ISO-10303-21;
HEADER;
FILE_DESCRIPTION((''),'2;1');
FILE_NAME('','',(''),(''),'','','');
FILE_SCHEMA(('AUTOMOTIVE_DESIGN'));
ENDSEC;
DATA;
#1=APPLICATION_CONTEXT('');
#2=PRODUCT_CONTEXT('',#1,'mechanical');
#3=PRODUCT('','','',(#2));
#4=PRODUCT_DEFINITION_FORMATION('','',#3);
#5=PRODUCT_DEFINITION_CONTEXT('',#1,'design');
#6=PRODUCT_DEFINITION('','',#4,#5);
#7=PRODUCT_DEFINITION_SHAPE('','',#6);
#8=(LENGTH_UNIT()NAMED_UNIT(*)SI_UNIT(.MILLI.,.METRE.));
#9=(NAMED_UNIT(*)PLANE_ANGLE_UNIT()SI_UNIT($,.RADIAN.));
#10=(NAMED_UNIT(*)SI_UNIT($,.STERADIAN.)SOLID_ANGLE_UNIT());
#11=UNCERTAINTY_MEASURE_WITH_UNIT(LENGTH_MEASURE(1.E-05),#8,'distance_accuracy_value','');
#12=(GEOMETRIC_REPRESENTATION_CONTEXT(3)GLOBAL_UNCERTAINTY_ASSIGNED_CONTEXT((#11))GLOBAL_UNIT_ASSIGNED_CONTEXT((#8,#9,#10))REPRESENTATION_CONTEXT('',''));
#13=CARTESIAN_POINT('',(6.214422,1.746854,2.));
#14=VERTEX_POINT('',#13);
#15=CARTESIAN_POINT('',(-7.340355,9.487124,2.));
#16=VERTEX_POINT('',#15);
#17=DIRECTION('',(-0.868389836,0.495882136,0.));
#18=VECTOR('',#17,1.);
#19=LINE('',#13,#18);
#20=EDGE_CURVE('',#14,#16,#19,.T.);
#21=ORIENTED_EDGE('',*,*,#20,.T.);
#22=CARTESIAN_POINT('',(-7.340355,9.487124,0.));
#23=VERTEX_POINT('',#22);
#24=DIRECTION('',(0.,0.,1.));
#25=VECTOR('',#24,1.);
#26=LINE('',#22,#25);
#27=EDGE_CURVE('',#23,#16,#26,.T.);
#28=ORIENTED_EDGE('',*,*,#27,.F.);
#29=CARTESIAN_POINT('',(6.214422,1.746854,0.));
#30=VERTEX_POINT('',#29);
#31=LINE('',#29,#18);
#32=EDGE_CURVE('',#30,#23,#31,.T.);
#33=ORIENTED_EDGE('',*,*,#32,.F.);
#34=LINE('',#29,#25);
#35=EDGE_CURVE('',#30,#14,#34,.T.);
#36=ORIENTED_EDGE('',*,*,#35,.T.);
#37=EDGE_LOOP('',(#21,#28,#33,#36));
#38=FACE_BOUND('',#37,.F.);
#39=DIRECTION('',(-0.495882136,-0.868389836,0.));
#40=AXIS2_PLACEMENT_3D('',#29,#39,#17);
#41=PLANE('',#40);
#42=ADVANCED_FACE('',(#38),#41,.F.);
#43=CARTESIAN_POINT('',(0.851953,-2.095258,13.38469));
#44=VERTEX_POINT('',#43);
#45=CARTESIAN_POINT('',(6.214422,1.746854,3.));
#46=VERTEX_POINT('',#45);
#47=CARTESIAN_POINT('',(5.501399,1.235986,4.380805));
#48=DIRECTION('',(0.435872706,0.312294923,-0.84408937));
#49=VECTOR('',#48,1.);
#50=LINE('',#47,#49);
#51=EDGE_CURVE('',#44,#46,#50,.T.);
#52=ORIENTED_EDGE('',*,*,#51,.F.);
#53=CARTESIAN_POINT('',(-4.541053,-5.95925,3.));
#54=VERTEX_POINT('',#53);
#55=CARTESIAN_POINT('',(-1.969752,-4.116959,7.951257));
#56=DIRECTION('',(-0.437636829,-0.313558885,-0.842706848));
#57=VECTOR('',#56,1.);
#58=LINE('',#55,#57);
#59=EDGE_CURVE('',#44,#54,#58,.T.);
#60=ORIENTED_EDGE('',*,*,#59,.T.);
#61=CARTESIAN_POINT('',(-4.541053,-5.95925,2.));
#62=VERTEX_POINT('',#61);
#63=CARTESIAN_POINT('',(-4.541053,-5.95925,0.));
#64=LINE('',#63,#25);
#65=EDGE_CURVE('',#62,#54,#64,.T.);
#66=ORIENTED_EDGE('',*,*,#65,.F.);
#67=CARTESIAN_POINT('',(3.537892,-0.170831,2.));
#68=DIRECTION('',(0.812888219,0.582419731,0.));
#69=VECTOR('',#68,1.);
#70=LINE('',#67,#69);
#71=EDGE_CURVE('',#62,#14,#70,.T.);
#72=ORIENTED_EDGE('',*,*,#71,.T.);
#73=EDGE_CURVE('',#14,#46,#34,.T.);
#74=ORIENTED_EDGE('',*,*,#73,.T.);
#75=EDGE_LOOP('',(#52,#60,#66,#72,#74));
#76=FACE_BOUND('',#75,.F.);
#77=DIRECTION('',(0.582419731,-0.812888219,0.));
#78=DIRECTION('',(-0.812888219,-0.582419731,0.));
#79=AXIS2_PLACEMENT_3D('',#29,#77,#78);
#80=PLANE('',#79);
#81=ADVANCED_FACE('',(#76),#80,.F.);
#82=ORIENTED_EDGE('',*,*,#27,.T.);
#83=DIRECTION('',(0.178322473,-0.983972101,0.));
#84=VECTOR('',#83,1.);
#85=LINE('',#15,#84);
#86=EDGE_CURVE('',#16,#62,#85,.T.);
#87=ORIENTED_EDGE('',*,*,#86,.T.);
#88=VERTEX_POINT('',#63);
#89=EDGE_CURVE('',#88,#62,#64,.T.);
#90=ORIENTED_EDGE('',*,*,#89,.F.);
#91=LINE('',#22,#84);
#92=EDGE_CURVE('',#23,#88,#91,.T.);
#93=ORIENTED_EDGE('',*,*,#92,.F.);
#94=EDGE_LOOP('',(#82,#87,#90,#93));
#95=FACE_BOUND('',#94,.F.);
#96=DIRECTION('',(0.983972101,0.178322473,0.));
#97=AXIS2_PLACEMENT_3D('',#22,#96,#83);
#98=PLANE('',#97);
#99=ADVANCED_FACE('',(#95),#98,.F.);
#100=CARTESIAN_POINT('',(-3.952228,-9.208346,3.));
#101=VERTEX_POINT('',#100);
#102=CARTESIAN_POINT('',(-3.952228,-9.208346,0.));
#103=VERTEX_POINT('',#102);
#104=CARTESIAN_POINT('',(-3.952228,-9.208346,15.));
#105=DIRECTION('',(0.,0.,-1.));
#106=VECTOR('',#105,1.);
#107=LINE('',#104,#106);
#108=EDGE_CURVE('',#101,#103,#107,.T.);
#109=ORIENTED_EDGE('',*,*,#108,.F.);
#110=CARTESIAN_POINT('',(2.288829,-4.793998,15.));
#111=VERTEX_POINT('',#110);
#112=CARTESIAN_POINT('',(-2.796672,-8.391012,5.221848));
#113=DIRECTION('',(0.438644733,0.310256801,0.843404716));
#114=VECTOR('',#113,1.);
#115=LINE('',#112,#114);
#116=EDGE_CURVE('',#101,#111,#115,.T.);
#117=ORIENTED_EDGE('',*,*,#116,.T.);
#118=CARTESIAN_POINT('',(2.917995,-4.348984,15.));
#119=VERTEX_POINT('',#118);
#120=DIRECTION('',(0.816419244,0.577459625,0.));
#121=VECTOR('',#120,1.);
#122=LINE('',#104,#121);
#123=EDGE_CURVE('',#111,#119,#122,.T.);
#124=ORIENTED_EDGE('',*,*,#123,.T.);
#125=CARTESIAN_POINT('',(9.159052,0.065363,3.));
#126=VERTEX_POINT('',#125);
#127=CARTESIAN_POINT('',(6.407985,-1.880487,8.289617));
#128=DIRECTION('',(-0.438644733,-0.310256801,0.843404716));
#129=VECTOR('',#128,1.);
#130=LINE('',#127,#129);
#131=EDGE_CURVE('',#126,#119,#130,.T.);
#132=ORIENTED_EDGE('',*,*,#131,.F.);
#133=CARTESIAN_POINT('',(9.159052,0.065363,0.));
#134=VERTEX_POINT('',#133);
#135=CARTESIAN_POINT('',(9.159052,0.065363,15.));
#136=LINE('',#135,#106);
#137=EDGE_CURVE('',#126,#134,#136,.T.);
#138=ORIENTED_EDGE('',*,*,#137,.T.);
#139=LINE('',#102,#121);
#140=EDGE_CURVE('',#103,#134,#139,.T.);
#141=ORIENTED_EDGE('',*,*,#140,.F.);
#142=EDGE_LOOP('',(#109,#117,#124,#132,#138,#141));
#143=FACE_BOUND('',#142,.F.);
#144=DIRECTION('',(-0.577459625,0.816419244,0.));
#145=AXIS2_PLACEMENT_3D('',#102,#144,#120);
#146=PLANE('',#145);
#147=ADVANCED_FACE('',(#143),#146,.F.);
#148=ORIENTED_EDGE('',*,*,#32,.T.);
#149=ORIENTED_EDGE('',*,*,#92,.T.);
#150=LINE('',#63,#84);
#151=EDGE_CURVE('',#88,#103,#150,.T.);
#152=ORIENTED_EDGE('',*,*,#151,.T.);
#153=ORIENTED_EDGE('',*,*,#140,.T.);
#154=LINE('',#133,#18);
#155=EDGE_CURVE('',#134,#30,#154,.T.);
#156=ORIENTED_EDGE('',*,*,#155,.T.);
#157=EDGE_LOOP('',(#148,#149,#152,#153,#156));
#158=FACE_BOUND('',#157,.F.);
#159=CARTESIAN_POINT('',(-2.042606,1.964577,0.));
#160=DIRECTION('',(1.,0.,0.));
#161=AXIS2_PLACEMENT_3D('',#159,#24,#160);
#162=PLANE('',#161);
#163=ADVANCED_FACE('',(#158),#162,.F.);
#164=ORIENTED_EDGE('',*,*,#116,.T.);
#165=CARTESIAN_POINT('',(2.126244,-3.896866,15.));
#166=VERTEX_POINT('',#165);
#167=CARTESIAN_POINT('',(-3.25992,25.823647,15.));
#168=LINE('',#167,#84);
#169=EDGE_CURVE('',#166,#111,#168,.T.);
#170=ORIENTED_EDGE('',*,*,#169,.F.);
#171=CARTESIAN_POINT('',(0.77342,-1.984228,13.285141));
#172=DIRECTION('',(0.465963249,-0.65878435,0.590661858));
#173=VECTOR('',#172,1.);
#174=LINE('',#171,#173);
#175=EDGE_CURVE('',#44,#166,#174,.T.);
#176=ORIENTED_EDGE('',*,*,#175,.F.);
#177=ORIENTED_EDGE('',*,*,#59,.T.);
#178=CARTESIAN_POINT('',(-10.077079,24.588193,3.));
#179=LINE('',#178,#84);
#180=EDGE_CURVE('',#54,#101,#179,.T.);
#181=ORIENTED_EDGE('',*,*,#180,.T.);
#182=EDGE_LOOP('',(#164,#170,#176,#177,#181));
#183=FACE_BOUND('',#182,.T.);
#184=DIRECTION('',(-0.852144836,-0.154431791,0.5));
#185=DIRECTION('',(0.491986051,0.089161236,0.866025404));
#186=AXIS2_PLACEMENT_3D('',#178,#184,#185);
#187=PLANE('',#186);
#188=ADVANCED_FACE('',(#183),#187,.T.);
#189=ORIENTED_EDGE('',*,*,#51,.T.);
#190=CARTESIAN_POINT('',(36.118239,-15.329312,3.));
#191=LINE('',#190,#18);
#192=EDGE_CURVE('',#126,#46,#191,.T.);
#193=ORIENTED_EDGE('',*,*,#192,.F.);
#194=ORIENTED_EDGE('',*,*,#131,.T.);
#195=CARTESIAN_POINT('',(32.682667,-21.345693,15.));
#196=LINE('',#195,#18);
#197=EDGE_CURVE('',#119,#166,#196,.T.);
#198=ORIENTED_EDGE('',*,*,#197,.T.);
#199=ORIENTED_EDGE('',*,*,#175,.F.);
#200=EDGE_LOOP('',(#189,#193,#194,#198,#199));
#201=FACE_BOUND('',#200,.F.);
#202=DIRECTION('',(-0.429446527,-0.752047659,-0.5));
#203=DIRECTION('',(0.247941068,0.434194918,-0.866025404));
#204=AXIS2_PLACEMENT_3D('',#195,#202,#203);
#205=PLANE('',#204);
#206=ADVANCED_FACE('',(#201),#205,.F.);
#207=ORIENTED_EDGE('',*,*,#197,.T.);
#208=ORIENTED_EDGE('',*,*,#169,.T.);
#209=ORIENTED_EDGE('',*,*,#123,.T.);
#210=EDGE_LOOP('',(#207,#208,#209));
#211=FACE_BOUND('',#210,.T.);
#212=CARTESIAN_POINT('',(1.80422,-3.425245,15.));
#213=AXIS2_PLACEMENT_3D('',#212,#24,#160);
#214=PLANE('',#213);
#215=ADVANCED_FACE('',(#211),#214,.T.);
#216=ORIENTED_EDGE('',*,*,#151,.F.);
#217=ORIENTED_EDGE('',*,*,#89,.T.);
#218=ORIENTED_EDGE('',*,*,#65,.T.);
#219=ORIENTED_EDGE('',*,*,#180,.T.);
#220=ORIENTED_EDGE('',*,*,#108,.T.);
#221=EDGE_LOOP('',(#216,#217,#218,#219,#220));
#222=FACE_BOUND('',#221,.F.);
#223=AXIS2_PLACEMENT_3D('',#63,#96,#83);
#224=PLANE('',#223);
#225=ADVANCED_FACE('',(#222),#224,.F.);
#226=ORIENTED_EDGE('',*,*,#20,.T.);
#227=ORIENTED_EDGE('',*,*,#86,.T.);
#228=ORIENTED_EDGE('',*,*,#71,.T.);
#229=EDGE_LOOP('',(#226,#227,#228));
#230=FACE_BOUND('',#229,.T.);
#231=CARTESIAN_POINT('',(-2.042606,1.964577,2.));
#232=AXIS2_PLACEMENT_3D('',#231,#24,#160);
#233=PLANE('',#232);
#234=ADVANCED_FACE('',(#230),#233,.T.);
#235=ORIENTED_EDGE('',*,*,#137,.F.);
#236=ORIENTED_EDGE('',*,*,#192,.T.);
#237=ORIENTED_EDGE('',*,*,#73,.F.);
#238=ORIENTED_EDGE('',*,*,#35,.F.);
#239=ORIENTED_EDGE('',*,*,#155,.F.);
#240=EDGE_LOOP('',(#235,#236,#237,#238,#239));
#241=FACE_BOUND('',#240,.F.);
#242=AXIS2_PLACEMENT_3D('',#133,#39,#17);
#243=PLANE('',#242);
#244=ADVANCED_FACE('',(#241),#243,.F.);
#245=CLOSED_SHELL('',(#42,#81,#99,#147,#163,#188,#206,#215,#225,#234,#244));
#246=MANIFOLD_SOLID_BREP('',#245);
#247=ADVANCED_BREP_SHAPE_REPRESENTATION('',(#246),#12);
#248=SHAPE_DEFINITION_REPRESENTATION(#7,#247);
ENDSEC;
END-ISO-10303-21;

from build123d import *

# Parameters (mm, degrees)
F1_DEPTH    = 2
F2_DEPTH    = 15
F3_T1_DEPTH = 65.3920789545
F3_T3_DEPTH = 65.4809656857


# Not quite as in the source:
# - a fillet or chamfer that OpenCascade refuses, or shapes differently, is made with other operations: its cross-section is extruded or revolved along the edge and cut away or added


with BuildPart() as f1:
    # F0 (on Top) → F1 (new body)
    with BuildSketch(Plane.XY):
        Polygon((6.2144221197, 1.7468538459), (-7.3403550955, 9.487123932), (-4.5410526356, -5.9592496019), align=None)
        Polygon((9.1590517926, 0.0653633566), (6.2144221197, 1.7468538459), (-4.5410526356, -5.9592496019), (-3.9522281139, -9.2083459887), align=None)
    extrude(amount=F1_DEPTH)

    # F0 (on Top) → F2 (join)
    with BuildSketch(Plane.XY):
        Polygon((9.1590517926, 0.0653633566), (6.2144221197, 1.7468538459), (-4.5410526356, -5.9592496019), (-3.9522281139, -9.2083459887), align=None)
    extrude(amount=F2_DEPTH)

    # F3: chamfer of 12 x 6.9282032303 on 2 edges, made by hand

    # F3_s2 → F3_t1 (cut)
    with BuildSketch(Plane(origin=(-4.6347910576, 25.5744832693, 0), x_dir=(0, 0, 1), z_dir=(0.1783224727, -0.9839721011, 0))):
        Polygon((3, 5.5309372275), (15, -1.3972660027), (15, 5.5309372275), align=None)
    extrude(amount=F3_T1_DEPTH, mode=Mode.SUBTRACT)

    # F3_s4 → F3_t3 (cut)
    with BuildSketch(Plane(origin=(33.8378902633, -19.3226642995, 0), x_dir=(0, 0, 1), z_dir=(-0.8683898362, 0.4958821356, 0))):
        Polygon((15, -2.3296321932), (3, 4.5985710371), (15, 4.5985710371), align=None)
    extrude(amount=F3_T3_DEPTH, mode=Mode.SUBTRACT)


solid = f1.part
